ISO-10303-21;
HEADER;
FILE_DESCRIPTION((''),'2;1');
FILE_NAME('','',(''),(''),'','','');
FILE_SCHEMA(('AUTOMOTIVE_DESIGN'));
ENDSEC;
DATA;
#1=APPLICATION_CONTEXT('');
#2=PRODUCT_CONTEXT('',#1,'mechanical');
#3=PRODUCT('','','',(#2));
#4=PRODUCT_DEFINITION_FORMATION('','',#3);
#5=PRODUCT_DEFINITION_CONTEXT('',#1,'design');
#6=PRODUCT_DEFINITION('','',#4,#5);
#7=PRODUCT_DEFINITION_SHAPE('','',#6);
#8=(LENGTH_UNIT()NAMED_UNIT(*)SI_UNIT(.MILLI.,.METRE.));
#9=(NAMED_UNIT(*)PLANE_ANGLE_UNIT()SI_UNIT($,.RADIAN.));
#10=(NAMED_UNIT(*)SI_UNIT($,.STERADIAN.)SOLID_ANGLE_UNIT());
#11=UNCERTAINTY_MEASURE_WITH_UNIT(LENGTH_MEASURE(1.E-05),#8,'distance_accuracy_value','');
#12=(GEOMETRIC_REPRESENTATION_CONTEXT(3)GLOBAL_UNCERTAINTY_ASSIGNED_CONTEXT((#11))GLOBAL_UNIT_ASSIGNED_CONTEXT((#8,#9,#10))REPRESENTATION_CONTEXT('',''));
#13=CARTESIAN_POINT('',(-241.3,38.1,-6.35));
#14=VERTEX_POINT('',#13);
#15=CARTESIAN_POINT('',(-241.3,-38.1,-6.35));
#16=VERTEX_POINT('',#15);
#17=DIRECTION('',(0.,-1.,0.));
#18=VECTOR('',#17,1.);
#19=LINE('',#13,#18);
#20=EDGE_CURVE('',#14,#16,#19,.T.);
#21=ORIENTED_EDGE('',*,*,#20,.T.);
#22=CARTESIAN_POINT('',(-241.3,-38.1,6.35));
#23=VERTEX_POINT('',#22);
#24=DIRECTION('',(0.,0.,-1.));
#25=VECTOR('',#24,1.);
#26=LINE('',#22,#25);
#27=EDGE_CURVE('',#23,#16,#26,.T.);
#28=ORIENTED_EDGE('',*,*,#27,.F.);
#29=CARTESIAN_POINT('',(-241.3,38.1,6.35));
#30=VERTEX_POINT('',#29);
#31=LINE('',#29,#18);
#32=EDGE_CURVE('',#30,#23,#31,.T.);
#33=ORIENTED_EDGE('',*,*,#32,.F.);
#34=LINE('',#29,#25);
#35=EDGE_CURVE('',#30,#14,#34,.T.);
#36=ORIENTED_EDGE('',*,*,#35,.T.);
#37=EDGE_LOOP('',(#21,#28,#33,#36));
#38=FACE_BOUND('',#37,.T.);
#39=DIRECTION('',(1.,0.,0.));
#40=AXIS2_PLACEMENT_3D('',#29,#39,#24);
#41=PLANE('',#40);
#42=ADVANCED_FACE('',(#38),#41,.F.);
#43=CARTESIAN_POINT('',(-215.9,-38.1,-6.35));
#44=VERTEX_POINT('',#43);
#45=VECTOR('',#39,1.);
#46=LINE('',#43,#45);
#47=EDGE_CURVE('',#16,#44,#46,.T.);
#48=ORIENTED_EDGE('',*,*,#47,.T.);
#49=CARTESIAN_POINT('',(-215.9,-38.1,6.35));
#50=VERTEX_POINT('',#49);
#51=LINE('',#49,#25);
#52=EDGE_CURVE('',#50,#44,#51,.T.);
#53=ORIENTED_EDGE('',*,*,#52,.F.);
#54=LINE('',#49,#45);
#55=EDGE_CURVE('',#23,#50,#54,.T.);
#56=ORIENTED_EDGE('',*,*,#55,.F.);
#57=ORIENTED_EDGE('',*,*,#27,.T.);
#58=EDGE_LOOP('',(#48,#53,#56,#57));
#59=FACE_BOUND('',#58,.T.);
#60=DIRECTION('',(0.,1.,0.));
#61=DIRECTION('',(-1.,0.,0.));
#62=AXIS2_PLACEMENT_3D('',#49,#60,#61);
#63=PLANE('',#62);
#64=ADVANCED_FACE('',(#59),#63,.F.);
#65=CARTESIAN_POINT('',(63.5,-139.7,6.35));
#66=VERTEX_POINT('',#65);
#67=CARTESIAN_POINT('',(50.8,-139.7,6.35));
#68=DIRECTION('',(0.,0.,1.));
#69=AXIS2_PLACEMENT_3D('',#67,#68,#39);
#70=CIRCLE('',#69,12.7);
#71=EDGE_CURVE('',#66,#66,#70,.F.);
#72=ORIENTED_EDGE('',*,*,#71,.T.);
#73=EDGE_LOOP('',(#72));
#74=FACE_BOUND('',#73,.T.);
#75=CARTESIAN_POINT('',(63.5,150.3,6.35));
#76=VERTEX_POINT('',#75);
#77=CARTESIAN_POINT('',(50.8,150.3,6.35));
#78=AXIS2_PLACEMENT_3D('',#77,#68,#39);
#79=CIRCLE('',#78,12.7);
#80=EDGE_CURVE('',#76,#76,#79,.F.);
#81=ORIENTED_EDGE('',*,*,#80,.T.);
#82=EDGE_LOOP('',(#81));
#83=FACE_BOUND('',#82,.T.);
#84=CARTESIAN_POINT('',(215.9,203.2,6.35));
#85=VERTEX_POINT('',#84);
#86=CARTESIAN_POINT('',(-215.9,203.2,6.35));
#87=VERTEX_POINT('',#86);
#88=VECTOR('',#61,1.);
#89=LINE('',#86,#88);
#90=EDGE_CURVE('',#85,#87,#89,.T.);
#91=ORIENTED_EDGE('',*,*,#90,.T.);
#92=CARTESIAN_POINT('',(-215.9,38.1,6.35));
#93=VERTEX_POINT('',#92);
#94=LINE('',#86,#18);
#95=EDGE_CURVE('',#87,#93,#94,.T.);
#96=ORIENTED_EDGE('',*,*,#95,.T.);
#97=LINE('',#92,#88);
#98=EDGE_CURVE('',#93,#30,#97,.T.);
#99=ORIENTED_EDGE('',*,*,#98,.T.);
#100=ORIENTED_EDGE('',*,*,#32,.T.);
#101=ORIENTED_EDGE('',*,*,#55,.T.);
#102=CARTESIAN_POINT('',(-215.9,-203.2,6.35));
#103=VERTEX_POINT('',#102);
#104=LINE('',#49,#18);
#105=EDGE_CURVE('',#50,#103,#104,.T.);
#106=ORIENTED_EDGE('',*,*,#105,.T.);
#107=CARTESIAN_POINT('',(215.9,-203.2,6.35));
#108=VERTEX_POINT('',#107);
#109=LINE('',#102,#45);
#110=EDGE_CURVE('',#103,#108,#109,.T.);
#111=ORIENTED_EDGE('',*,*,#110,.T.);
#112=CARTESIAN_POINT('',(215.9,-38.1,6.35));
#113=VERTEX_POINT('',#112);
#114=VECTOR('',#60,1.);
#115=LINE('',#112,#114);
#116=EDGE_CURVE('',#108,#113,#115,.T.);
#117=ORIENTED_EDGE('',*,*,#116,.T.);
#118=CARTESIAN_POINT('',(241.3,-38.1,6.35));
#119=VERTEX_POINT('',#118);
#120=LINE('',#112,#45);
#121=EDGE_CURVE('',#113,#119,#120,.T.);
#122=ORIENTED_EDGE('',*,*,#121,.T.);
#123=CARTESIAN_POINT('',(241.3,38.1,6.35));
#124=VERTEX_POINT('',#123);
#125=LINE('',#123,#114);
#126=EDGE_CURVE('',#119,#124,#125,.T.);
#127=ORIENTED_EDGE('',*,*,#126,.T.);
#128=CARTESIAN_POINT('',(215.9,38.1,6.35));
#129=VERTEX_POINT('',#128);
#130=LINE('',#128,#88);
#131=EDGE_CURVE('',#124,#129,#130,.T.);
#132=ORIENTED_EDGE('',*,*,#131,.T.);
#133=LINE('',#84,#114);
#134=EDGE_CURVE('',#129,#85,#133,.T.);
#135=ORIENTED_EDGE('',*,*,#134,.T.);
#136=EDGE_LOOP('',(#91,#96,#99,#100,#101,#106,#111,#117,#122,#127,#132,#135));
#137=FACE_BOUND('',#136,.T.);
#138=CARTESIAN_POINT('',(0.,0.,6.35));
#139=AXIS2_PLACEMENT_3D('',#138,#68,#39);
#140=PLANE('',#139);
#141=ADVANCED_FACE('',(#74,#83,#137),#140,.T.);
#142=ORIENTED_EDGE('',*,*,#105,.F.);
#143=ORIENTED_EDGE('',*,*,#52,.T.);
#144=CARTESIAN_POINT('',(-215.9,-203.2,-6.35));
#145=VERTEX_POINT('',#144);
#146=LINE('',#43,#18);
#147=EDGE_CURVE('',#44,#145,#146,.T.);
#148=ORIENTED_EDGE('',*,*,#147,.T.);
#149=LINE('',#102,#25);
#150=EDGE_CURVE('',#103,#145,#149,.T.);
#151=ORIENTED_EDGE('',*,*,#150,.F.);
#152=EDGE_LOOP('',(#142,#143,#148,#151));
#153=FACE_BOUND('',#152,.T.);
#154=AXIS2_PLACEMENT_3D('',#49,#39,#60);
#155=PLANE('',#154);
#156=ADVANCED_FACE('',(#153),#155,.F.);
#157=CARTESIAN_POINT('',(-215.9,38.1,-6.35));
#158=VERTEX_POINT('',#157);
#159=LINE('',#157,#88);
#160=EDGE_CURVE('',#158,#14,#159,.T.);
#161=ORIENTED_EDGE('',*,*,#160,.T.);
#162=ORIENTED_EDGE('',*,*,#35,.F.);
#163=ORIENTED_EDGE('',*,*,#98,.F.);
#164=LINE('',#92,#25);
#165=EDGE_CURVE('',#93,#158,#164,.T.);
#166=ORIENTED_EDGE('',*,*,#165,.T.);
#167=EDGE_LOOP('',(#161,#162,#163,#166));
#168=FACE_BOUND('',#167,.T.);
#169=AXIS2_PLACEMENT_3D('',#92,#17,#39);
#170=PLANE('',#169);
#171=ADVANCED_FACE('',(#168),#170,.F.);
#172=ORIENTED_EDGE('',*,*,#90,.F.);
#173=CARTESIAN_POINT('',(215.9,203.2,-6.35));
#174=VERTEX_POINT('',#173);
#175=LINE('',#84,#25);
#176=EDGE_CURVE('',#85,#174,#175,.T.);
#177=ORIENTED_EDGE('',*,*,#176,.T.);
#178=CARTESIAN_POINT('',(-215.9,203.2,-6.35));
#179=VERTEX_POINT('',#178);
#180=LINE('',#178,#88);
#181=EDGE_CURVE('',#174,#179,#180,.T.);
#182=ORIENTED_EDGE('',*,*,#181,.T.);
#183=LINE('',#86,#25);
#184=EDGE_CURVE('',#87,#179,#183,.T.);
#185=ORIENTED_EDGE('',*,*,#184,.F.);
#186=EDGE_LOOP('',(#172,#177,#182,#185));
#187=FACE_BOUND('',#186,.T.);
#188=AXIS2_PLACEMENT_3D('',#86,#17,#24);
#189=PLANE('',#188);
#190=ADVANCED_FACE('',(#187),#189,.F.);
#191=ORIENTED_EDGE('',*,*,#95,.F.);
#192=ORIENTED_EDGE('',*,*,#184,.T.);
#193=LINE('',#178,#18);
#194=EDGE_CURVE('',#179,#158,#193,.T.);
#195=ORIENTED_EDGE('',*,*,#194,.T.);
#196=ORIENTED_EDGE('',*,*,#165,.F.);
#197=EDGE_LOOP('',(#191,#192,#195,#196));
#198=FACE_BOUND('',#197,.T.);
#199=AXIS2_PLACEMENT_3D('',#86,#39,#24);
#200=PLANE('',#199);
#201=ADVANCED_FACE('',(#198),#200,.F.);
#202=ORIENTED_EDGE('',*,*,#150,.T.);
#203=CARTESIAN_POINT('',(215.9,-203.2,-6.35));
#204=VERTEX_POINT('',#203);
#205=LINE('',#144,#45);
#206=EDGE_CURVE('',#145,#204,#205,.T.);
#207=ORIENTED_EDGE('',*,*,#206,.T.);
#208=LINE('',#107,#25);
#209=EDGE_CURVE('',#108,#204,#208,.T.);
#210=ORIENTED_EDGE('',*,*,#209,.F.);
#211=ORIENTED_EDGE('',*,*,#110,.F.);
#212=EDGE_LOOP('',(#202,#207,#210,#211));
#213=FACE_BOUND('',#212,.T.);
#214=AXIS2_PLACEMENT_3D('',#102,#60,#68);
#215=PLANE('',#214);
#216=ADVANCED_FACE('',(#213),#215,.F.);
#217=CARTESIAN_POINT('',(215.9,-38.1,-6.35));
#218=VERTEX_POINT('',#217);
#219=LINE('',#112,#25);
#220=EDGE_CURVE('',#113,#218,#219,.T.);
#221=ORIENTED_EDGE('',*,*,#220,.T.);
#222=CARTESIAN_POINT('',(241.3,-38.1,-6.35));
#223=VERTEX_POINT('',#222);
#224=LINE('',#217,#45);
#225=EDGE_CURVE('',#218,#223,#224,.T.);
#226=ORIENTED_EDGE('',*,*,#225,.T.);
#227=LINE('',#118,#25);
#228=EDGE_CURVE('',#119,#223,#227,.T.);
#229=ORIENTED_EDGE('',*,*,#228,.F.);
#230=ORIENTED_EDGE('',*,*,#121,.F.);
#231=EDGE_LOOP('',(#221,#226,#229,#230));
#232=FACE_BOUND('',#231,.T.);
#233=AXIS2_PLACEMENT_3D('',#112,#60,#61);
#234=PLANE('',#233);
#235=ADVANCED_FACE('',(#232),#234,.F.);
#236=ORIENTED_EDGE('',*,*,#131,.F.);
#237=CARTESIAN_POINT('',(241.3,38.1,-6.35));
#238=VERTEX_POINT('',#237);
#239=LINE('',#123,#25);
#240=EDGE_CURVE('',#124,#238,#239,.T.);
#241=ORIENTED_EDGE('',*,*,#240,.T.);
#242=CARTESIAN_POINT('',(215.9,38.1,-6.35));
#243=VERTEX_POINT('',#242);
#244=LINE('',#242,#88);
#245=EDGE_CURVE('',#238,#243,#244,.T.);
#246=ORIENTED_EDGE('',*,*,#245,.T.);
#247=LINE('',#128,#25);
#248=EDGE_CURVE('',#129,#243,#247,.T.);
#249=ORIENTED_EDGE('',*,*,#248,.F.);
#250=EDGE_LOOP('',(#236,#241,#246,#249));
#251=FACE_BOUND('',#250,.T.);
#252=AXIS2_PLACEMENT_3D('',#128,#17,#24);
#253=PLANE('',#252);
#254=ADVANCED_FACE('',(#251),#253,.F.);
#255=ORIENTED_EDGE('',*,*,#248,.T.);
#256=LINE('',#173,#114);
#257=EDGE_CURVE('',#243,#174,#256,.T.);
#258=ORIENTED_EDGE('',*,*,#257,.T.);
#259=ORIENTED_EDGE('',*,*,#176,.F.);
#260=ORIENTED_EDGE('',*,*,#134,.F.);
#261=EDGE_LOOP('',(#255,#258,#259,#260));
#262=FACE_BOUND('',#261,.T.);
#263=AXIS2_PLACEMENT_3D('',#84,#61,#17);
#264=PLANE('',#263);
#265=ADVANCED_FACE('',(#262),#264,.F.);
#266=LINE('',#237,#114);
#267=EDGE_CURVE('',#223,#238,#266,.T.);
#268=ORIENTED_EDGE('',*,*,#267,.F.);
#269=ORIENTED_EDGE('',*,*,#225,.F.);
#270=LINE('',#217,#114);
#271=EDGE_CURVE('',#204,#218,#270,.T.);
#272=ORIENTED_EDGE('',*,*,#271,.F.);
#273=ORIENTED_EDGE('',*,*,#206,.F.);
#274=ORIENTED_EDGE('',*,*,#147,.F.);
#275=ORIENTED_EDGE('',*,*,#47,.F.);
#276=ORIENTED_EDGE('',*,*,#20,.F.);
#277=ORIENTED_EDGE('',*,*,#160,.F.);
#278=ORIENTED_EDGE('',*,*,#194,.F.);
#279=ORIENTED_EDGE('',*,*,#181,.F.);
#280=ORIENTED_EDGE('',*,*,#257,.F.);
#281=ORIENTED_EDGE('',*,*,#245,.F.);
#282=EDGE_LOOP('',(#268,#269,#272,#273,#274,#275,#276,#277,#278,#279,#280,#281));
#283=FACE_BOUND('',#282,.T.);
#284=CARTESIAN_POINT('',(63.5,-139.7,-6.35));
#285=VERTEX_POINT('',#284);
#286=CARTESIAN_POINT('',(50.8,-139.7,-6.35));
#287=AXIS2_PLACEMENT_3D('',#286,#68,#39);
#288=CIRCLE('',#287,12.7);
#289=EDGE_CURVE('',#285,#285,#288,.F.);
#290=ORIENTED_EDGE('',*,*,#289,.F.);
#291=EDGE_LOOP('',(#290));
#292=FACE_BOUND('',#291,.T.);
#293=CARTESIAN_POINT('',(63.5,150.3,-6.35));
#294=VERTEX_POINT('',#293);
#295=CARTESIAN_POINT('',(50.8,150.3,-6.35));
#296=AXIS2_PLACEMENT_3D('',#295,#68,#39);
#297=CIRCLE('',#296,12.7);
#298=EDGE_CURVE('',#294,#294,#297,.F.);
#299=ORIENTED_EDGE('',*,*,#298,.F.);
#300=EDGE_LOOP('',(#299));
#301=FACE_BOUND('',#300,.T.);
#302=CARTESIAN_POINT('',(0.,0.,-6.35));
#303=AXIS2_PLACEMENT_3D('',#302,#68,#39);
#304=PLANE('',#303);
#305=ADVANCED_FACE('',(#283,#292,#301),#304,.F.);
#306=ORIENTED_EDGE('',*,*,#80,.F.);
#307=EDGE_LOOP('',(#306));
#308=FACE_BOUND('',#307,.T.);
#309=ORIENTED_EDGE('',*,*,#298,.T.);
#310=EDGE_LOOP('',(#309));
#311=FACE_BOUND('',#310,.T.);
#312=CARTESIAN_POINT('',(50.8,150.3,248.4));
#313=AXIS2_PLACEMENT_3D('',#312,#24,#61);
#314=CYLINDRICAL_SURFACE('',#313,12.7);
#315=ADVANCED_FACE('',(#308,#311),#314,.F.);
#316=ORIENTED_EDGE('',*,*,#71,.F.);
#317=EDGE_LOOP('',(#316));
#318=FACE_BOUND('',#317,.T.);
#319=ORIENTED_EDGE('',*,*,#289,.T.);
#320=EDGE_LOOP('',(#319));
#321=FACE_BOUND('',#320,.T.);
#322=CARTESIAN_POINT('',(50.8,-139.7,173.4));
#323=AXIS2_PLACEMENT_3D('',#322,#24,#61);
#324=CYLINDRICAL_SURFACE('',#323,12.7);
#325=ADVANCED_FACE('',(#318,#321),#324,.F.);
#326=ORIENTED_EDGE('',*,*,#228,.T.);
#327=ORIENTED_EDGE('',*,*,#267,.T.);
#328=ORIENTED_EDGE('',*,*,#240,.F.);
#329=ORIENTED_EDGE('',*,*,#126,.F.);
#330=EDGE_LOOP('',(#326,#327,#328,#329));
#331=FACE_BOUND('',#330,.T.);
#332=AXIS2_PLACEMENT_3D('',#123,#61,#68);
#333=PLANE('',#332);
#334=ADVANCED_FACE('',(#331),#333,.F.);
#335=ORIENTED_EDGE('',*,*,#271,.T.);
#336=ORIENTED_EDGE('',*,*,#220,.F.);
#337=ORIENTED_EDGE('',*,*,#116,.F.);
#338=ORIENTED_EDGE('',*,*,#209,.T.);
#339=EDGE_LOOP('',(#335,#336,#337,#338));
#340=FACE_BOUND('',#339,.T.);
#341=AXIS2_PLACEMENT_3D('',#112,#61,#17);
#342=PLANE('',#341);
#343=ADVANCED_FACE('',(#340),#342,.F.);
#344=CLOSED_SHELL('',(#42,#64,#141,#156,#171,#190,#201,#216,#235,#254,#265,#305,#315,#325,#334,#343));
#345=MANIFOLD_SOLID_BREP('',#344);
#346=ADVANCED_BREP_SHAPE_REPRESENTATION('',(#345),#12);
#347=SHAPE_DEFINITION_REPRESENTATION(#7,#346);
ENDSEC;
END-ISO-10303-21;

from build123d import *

# Parameters (mm, degrees)
BOSS_EXTRUDE1_DEPTH = 6.35
CAVITY1_START       = -6.35
CAVITY1_OUTLINE_R   = 12.7
CAVITY1_DEPTH       = 12.7


# Read off the part's stored shape, not the designer's step: Cavity1
with BuildPart() as part:
    # Sketch1 → Boss-Extrude1 (new, symmetric)
    with BuildSketch(Plane.XY):
        Polygon((-215.9, -38.1), (-215.9, -203.2), (215.9, -203.2), (215.9, -38.1), (241.3, -38.1), (241.3, 38.1), (215.9, 38.1), (215.9, 203.2), (-215.9, 203.2), (-215.9, 38.1), (-241.3, 38.1), (-241.3, -38.1), align=None)
    extrude(amount=BOSS_EXTRUDE1_DEPTH, both=True)

    # Cavity1 outline → Cavity1 (cut)
    with BuildSketch(Plane.XY.offset(CAVITY1_START)):
        with Locations((50.8, -139.7)):
            Circle(CAVITY1_OUTLINE_R)
        with Locations((50.8, 150.3)):
            Circle(CAVITY1_OUTLINE_R)
    extrude(amount=CAVITY1_DEPTH, mode=Mode.SUBTRACT)


solid = part.part
